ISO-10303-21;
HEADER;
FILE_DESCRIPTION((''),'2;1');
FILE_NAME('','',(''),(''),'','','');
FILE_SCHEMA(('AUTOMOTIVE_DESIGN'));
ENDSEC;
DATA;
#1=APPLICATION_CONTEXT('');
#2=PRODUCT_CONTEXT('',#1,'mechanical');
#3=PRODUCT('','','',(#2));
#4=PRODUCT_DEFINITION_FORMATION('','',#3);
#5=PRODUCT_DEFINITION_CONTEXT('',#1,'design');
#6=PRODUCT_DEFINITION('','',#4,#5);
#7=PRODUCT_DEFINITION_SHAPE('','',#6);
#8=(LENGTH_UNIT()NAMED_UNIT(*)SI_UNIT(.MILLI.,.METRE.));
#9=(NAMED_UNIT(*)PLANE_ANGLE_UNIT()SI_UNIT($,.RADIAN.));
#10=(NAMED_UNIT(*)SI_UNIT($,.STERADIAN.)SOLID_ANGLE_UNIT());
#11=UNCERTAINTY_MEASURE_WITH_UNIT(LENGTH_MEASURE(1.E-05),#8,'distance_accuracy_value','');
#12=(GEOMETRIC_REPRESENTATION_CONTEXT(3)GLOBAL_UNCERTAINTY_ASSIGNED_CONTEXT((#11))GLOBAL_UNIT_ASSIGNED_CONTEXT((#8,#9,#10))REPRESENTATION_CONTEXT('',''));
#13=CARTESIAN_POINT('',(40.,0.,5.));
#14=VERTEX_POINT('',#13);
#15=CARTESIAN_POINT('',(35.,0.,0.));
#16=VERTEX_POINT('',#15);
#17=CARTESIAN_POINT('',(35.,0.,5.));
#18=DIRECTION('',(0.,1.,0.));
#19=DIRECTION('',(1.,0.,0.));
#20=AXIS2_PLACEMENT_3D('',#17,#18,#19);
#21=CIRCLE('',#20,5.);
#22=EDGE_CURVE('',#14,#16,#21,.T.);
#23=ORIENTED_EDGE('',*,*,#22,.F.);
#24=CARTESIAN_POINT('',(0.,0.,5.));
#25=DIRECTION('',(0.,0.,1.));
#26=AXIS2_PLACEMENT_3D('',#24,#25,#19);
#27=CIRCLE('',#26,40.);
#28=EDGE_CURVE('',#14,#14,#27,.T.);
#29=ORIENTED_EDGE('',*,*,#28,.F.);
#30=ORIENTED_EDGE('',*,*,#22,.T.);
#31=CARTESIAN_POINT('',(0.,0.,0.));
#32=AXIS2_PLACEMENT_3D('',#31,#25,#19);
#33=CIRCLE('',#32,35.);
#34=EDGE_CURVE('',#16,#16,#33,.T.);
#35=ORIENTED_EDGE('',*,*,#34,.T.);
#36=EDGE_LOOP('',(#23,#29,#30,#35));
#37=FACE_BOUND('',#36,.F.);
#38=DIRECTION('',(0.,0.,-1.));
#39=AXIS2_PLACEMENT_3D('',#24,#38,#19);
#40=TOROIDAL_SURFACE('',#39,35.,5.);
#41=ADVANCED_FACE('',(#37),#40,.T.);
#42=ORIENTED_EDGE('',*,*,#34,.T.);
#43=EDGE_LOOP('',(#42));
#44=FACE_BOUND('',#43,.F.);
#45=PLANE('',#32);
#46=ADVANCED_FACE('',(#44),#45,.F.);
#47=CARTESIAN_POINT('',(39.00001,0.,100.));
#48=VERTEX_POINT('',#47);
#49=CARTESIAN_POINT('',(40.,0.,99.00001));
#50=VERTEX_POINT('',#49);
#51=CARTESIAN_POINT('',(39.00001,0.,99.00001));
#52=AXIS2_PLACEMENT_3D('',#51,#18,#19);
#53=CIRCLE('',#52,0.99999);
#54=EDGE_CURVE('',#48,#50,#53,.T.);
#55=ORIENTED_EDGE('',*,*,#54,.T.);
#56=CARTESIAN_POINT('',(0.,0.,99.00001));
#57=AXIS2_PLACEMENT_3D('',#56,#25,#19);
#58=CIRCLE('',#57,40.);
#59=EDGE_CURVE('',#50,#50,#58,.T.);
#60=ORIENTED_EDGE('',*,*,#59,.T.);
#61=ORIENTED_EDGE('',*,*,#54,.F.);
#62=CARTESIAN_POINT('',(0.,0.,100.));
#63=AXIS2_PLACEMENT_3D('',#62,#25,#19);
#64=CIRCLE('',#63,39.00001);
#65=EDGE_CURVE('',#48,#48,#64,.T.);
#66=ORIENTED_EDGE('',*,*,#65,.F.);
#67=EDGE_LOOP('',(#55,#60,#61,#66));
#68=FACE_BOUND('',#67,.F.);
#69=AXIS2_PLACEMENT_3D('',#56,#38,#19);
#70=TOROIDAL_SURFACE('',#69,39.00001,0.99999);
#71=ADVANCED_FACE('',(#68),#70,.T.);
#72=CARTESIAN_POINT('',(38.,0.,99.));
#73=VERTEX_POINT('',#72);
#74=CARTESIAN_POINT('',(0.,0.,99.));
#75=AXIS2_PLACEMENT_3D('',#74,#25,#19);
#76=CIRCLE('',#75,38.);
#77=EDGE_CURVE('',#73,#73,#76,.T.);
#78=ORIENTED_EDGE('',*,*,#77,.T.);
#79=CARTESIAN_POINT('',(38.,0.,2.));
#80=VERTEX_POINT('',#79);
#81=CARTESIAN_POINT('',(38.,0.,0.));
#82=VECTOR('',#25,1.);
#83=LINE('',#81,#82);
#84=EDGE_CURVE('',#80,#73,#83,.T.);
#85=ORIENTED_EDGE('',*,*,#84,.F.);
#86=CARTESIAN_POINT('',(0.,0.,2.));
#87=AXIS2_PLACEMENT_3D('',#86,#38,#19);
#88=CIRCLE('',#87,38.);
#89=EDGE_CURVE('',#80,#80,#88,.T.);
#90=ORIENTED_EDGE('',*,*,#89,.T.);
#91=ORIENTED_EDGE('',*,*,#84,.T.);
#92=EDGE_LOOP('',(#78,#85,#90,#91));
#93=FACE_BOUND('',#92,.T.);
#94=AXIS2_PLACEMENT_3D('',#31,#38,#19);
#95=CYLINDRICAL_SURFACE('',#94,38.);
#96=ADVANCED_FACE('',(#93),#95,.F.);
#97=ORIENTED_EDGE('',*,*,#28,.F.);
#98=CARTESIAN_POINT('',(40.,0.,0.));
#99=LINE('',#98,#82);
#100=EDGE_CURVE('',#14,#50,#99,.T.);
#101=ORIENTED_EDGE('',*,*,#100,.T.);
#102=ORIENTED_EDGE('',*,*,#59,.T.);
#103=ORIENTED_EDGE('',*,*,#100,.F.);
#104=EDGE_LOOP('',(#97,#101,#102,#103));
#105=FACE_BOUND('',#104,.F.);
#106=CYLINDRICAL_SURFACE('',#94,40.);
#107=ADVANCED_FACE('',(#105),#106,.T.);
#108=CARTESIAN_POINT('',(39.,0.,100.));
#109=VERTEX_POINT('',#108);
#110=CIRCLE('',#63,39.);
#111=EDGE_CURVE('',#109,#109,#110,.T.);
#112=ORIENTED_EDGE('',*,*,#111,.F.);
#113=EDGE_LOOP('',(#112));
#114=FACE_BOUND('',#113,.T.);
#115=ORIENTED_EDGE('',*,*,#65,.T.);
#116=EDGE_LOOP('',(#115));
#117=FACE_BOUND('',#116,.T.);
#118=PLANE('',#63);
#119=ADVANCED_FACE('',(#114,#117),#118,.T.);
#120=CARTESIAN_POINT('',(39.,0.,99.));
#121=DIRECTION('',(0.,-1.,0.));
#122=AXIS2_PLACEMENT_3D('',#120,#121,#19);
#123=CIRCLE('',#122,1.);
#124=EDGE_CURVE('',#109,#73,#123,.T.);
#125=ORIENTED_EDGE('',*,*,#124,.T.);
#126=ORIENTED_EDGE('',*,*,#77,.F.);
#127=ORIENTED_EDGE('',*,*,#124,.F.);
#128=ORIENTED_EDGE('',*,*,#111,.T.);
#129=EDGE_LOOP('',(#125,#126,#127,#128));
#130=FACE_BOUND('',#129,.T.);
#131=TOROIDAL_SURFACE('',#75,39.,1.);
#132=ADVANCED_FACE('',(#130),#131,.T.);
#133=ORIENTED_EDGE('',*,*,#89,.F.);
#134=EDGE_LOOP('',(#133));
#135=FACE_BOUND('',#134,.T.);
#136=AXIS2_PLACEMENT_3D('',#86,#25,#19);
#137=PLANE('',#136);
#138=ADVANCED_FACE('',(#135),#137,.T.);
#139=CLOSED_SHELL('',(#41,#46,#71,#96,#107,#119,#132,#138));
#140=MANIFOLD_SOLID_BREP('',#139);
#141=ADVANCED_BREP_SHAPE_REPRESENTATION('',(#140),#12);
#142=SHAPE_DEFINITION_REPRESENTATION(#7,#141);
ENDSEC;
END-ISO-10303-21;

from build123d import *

# Parameters (mm, degrees)
F0_R     = 40
F1_DEPTH = 100
F2_T     = -2
F3_R     = 1
F4_R     = 0.99999
F5_R     = 5


# Not quite as in the source:
# - a fillet or chamfer is up to 0.001 mm smaller than in the source, because OpenCascade refuses the exact size


with BuildPart() as f1:
    # F0 (on Top) → F1 (new body)
    with BuildSketch(Plane.XY):
        Circle(F0_R)
    extrude(amount=F1_DEPTH)

    # F2
    f2_openings = [f1.faces().sort_by_distance(p)[0] for p in [
        (0, 0, 100),
    ]]
    offset(amount=F2_T, openings=f2_openings)

    # F3
    f3_edges = [f1.edges().sort_by_distance(p)[0] for p in [
        (-38, 0, 100),
    ]]
    fillet(f3_edges, radius=F3_R)

    # F4 (radius 1 in the source; OpenCascade refuses exactly that, so slightly less here)
    f4_edges = [f1.edges().sort_by_distance(p)[0] for p in [
        (-40, 0, 100),
    ]]
    fillet(f4_edges, radius=F4_R)

    # F5
    f5_edges = [f1.edges().sort_by_distance(p)[0] for p in [
        (-40, 0, 0),
    ]]
    fillet(f5_edges, radius=F5_R)


solid = f1.part
